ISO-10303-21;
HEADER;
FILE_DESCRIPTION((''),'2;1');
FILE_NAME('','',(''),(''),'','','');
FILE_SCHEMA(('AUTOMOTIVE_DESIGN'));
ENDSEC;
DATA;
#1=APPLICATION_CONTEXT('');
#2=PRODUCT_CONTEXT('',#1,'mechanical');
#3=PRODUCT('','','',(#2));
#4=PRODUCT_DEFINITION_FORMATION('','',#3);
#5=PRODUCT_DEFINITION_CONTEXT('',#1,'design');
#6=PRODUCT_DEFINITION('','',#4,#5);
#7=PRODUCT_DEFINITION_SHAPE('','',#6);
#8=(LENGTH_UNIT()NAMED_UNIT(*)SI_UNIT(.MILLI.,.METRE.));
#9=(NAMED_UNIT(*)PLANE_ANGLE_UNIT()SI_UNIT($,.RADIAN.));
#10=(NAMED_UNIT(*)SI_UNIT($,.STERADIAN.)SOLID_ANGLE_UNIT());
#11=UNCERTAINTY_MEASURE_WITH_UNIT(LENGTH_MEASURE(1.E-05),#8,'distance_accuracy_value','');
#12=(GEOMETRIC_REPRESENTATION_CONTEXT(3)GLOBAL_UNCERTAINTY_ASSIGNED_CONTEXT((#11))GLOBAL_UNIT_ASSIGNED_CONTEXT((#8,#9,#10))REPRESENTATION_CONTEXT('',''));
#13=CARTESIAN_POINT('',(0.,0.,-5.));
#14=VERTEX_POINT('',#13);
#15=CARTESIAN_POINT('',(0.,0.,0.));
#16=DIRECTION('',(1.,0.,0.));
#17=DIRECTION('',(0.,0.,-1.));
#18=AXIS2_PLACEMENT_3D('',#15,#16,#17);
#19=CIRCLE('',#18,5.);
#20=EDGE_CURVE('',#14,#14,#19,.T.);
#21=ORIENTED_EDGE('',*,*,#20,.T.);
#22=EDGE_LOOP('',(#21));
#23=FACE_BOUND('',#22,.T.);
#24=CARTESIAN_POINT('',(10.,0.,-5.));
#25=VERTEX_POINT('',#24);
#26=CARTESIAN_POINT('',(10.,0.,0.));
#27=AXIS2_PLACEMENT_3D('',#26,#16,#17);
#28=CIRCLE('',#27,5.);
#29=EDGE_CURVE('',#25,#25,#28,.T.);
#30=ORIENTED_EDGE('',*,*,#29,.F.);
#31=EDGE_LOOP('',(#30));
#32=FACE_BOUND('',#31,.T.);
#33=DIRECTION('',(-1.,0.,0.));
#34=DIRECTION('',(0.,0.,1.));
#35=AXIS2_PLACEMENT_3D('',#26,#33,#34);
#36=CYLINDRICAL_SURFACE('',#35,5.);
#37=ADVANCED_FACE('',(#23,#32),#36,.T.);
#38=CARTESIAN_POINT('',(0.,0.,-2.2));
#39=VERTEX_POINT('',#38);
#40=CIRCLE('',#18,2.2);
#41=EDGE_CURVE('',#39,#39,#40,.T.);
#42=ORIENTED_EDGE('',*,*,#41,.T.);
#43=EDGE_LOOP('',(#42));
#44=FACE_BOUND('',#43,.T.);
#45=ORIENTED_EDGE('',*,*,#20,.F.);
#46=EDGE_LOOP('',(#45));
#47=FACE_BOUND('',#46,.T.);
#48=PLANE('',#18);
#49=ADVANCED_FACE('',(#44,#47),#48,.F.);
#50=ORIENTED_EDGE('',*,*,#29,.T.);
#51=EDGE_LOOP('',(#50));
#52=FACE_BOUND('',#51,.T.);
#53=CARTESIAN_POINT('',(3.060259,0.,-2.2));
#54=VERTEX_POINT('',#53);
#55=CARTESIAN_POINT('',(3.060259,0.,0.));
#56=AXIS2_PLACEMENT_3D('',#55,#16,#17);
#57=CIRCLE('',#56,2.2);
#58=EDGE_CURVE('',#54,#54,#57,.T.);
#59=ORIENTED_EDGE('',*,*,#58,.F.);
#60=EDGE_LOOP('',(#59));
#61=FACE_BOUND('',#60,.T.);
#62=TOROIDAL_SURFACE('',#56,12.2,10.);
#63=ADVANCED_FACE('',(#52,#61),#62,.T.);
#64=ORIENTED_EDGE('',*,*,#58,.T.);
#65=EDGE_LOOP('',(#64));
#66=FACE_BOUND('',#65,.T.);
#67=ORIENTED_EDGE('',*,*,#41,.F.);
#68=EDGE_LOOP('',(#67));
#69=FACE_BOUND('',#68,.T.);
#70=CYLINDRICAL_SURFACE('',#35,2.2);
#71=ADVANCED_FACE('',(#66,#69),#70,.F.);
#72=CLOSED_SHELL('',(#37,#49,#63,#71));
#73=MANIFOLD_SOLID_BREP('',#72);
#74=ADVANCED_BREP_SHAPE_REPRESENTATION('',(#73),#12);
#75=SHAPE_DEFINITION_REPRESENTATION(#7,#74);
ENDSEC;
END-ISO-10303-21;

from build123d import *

# Parameters (mm, degrees)
ESQUISSE3_R        = 5
ESQUISSE3_R_2      = 2.2
BOSS_EXTRU_2_DEPTH = 10
CONG_1_R           = 10


with BuildPart() as part:
    # Esquisse3 → Boss.-Extru.2 (new body)
    with BuildSketch(Plane(origin=(0, 0, 0), x_dir=(0, 0, -1), z_dir=(1, 0, 0))):
        Circle(ESQUISSE3_R)
        Circle(ESQUISSE3_R_2, mode=Mode.SUBTRACT)
    extrude(amount=BOSS_EXTRU_2_DEPTH)

    # Congé1
    # the kernel refuses this fillet: 10 mm, written as the material it takes off along each edge
    with BuildSketch(Plane(origin=(10, 0, 0), x_dir=(0, 0, -1), z_dir=(0, -1, 0))) as cong_1_piece_1:
        with BuildLine():
            CenterArc((12.2, -6.939740629), CONG_1_R, 136.054480438, 43.945519562)
            Line((5, 0), (4.856, 0.138794813))
            ThreePointArc((4.856, 0.138794813), (3.6, 0.2), (2.2, 0.2))
            Line((2.2, 0.2), (2, 0))
            Line((2, 0), (2, -6.939740629))
            Line((2, -6.939740629), (2.2, -6.939740629))
        make_face()
    revolve(axis=Axis((10, 0, 0), (1, 0, 0)), mode=Mode.SUBTRACT)


solid = part.part
